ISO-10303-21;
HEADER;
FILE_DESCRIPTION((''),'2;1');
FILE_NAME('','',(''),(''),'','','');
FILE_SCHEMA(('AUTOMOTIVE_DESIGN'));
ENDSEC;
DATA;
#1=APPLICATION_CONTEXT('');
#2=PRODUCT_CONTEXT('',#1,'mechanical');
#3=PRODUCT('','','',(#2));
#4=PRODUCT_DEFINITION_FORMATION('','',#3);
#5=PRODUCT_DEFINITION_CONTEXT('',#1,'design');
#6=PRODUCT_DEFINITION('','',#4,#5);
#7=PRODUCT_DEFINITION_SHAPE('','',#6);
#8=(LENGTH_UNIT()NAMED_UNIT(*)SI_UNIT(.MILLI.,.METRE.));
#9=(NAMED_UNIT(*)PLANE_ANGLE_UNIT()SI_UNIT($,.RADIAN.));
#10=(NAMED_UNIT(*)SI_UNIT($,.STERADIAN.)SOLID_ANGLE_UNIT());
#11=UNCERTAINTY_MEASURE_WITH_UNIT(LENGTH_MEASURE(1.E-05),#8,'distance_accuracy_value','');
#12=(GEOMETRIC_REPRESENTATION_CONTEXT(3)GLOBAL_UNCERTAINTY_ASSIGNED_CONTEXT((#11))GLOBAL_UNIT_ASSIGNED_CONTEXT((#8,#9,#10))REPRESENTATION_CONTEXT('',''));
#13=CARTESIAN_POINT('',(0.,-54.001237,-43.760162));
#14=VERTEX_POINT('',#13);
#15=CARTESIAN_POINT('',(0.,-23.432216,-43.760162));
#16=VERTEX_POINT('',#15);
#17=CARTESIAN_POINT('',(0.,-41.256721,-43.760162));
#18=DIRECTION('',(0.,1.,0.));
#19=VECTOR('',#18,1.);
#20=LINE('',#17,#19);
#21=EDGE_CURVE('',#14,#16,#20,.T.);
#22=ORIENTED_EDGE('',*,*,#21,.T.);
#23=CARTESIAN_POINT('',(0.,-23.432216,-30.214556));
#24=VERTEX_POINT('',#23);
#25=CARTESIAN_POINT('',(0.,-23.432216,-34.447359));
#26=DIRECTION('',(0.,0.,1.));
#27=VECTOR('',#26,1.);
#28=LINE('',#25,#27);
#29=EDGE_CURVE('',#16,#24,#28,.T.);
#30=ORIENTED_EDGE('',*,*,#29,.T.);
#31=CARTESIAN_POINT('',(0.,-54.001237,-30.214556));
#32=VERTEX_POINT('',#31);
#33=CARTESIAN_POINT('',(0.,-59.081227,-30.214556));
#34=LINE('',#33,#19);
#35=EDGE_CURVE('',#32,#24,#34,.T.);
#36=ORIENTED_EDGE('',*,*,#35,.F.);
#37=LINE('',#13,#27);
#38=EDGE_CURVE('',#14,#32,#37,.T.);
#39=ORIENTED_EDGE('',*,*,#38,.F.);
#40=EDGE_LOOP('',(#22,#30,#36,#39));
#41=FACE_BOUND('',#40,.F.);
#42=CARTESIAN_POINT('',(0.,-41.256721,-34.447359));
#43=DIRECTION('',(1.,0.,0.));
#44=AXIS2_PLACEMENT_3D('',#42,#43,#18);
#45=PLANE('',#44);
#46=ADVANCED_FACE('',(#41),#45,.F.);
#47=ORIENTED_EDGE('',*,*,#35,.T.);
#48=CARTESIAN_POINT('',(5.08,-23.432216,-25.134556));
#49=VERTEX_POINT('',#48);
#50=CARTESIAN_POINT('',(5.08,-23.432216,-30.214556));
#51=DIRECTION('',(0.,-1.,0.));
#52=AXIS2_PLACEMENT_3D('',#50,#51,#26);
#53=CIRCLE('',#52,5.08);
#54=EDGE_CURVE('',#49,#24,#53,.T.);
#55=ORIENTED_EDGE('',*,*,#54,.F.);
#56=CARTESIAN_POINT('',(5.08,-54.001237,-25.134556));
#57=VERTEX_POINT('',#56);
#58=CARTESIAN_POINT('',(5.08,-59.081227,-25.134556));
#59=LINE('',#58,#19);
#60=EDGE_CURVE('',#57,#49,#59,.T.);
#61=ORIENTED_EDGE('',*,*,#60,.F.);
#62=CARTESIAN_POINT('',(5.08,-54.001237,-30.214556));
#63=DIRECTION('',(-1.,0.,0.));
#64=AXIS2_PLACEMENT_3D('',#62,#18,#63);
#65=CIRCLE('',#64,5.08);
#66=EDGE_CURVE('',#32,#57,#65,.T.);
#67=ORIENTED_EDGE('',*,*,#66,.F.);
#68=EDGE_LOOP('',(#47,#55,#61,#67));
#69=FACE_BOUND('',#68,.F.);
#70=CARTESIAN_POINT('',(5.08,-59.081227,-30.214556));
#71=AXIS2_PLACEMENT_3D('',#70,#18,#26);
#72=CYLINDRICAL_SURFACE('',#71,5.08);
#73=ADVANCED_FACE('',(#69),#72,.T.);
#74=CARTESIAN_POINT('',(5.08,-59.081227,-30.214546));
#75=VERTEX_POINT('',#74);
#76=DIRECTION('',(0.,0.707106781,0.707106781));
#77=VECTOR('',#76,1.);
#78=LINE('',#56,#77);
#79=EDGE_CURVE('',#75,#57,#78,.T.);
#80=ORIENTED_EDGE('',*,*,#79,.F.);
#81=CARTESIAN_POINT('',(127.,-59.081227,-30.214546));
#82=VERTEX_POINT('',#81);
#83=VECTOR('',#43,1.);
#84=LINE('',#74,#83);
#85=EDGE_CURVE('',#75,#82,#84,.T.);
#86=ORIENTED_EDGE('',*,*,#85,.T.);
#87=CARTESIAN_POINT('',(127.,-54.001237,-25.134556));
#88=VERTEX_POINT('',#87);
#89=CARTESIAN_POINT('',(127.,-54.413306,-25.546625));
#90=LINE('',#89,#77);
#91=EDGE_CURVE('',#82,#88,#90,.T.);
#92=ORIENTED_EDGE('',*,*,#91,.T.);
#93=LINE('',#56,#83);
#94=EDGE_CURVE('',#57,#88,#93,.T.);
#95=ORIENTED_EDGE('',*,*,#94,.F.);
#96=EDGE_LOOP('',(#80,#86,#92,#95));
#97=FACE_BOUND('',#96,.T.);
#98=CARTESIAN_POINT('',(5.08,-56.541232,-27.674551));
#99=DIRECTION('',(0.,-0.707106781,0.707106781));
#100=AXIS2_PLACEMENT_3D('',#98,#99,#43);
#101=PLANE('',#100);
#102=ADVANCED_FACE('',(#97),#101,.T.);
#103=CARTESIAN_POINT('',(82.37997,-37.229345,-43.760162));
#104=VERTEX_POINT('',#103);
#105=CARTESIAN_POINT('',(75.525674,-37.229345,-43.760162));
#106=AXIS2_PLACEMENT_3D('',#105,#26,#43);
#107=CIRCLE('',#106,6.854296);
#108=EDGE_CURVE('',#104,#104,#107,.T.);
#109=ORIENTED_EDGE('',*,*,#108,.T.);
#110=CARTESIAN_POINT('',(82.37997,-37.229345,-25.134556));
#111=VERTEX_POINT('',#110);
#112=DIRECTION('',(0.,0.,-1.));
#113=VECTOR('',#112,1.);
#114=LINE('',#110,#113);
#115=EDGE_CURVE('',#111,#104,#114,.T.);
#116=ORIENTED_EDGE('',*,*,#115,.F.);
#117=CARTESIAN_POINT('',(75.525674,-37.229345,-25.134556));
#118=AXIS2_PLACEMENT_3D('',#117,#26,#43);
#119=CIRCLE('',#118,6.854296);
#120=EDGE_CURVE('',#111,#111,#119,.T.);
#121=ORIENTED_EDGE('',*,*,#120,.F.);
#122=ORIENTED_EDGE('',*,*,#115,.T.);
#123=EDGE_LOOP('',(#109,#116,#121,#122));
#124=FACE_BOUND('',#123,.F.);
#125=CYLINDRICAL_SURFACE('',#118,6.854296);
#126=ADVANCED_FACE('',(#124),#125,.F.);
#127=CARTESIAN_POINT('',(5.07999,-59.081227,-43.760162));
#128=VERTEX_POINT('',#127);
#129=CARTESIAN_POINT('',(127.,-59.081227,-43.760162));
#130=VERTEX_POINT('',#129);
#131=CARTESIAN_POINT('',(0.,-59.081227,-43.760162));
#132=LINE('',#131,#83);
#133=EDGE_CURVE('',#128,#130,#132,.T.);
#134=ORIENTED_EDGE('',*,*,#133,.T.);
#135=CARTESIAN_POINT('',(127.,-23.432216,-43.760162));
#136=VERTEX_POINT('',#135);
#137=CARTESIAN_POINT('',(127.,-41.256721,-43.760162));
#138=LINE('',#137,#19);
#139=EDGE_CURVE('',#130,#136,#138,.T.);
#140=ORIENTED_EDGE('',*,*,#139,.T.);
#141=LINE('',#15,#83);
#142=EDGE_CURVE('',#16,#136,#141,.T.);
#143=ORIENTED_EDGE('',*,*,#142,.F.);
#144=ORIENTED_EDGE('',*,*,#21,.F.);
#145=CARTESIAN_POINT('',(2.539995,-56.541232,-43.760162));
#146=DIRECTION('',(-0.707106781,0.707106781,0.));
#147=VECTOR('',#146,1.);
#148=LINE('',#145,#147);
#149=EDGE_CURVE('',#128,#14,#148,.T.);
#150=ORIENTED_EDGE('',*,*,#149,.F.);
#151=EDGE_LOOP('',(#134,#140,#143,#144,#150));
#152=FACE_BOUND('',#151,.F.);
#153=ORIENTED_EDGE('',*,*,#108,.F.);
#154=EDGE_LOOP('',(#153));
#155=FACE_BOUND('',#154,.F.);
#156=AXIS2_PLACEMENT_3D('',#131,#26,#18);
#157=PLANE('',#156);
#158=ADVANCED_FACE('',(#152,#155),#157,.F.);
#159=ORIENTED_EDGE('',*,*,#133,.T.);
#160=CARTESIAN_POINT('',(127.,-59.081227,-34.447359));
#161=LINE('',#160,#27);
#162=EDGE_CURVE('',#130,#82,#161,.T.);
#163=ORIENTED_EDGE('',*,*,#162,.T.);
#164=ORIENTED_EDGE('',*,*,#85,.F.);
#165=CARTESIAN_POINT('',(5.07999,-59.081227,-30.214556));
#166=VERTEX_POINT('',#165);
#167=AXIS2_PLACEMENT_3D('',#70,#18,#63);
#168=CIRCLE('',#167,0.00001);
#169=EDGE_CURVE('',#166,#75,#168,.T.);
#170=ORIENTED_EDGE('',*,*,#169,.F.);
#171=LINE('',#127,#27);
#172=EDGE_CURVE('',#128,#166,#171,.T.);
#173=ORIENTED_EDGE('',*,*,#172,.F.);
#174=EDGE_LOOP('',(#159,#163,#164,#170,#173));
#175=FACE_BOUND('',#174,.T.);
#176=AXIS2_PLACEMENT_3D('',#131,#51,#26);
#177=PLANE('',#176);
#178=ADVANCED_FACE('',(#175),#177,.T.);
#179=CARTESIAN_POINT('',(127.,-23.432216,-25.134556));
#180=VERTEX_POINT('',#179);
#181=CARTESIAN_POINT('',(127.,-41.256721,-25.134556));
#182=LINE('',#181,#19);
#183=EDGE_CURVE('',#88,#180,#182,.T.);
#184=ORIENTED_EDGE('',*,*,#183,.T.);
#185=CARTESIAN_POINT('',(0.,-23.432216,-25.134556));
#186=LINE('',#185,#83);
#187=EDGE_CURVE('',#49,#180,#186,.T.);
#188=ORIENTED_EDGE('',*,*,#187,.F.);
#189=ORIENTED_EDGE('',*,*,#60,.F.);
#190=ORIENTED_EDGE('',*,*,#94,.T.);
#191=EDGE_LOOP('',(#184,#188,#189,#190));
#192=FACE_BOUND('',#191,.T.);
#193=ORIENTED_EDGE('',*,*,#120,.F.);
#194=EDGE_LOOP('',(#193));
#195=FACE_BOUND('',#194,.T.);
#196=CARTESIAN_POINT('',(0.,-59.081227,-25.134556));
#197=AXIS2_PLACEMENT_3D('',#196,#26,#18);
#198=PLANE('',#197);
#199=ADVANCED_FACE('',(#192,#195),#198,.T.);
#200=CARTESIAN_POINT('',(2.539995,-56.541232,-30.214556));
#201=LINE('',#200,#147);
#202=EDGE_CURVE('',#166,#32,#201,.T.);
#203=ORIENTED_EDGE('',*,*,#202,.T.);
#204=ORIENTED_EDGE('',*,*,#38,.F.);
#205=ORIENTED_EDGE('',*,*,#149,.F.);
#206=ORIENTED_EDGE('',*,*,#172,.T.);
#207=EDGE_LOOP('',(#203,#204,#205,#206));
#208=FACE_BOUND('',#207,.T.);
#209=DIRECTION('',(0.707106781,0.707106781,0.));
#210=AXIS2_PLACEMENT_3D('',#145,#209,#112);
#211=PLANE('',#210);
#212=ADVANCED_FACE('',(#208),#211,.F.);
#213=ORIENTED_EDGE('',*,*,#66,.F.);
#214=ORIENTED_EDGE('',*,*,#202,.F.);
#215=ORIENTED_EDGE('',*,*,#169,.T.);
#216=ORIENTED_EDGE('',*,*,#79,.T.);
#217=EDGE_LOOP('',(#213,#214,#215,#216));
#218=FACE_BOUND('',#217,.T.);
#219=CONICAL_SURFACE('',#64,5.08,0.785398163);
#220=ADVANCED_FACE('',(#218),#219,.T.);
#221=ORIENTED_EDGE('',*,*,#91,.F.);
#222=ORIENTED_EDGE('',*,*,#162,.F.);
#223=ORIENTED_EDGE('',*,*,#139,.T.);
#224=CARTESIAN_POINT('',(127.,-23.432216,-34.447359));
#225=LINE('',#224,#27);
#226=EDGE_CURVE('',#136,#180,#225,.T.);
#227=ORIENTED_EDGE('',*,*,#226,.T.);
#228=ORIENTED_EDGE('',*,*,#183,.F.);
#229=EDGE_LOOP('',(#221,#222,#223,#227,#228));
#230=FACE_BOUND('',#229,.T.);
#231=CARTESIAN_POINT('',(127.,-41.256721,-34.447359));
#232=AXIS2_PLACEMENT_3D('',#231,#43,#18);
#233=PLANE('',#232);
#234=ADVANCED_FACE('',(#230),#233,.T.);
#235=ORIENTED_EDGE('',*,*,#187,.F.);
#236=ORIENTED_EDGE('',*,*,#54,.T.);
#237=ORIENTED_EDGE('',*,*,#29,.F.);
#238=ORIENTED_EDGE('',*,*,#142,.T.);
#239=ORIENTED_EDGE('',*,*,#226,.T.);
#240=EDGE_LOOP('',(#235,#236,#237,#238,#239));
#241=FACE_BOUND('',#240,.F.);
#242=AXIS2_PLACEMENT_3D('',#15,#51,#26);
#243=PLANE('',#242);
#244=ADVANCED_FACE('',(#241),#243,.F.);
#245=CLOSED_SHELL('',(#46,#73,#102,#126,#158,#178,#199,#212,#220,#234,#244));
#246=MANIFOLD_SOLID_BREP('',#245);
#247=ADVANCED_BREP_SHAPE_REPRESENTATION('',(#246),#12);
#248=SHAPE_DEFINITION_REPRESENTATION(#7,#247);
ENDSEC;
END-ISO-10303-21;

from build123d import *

# Parameters (mm, degrees)
F0_W     = 35.6490109116
F0_H     = 18.6256058514
F1_DEPTH = 127
F2_R     = 6.8542963407
F3_DEPTH = 25.4
F4_R     = 5.08
F5_SIZE  = 5.07999


# Not quite as in the source:
# - a fillet or chamfer is up to 0.001 mm smaller than in the source, because OpenCascade refuses the exact size


with BuildPart() as f1:
    # F0 (on Right) → F1 (new body)
    with BuildSketch(Plane.YZ):
        with Locations((-41.2567211315, -34.4473589212)):
            Rectangle(F0_W, F0_H)
    extrude(amount=F1_DEPTH)

    # F2 (on face) → F3 (cut)
    with BuildSketch(Plane.XY.offset(-25.1345559955)):
        with Locations((75.5256735351, -37.2293450889)):
            Circle(F2_R)
    extrude(amount=-F3_DEPTH, mode=Mode.SUBTRACT)

    # F4
    f4_edges = [f1.edges().sort_by_distance(p)[0] for p in [
        (0, -41.256721, -25.134556),
    ]]
    fillet(f4_edges, radius=F4_R)

    # F5 (size 5.08 in the source; OpenCascade refuses exactly that, so slightly less here)
    f5_edges = [f1.edges().sort_by_distance(p)[0] for p in [
        (66.04, -59.081227, -25.134556),
    ]]
    chamfer(f5_edges, length=F5_SIZE)


solid = f1.part
